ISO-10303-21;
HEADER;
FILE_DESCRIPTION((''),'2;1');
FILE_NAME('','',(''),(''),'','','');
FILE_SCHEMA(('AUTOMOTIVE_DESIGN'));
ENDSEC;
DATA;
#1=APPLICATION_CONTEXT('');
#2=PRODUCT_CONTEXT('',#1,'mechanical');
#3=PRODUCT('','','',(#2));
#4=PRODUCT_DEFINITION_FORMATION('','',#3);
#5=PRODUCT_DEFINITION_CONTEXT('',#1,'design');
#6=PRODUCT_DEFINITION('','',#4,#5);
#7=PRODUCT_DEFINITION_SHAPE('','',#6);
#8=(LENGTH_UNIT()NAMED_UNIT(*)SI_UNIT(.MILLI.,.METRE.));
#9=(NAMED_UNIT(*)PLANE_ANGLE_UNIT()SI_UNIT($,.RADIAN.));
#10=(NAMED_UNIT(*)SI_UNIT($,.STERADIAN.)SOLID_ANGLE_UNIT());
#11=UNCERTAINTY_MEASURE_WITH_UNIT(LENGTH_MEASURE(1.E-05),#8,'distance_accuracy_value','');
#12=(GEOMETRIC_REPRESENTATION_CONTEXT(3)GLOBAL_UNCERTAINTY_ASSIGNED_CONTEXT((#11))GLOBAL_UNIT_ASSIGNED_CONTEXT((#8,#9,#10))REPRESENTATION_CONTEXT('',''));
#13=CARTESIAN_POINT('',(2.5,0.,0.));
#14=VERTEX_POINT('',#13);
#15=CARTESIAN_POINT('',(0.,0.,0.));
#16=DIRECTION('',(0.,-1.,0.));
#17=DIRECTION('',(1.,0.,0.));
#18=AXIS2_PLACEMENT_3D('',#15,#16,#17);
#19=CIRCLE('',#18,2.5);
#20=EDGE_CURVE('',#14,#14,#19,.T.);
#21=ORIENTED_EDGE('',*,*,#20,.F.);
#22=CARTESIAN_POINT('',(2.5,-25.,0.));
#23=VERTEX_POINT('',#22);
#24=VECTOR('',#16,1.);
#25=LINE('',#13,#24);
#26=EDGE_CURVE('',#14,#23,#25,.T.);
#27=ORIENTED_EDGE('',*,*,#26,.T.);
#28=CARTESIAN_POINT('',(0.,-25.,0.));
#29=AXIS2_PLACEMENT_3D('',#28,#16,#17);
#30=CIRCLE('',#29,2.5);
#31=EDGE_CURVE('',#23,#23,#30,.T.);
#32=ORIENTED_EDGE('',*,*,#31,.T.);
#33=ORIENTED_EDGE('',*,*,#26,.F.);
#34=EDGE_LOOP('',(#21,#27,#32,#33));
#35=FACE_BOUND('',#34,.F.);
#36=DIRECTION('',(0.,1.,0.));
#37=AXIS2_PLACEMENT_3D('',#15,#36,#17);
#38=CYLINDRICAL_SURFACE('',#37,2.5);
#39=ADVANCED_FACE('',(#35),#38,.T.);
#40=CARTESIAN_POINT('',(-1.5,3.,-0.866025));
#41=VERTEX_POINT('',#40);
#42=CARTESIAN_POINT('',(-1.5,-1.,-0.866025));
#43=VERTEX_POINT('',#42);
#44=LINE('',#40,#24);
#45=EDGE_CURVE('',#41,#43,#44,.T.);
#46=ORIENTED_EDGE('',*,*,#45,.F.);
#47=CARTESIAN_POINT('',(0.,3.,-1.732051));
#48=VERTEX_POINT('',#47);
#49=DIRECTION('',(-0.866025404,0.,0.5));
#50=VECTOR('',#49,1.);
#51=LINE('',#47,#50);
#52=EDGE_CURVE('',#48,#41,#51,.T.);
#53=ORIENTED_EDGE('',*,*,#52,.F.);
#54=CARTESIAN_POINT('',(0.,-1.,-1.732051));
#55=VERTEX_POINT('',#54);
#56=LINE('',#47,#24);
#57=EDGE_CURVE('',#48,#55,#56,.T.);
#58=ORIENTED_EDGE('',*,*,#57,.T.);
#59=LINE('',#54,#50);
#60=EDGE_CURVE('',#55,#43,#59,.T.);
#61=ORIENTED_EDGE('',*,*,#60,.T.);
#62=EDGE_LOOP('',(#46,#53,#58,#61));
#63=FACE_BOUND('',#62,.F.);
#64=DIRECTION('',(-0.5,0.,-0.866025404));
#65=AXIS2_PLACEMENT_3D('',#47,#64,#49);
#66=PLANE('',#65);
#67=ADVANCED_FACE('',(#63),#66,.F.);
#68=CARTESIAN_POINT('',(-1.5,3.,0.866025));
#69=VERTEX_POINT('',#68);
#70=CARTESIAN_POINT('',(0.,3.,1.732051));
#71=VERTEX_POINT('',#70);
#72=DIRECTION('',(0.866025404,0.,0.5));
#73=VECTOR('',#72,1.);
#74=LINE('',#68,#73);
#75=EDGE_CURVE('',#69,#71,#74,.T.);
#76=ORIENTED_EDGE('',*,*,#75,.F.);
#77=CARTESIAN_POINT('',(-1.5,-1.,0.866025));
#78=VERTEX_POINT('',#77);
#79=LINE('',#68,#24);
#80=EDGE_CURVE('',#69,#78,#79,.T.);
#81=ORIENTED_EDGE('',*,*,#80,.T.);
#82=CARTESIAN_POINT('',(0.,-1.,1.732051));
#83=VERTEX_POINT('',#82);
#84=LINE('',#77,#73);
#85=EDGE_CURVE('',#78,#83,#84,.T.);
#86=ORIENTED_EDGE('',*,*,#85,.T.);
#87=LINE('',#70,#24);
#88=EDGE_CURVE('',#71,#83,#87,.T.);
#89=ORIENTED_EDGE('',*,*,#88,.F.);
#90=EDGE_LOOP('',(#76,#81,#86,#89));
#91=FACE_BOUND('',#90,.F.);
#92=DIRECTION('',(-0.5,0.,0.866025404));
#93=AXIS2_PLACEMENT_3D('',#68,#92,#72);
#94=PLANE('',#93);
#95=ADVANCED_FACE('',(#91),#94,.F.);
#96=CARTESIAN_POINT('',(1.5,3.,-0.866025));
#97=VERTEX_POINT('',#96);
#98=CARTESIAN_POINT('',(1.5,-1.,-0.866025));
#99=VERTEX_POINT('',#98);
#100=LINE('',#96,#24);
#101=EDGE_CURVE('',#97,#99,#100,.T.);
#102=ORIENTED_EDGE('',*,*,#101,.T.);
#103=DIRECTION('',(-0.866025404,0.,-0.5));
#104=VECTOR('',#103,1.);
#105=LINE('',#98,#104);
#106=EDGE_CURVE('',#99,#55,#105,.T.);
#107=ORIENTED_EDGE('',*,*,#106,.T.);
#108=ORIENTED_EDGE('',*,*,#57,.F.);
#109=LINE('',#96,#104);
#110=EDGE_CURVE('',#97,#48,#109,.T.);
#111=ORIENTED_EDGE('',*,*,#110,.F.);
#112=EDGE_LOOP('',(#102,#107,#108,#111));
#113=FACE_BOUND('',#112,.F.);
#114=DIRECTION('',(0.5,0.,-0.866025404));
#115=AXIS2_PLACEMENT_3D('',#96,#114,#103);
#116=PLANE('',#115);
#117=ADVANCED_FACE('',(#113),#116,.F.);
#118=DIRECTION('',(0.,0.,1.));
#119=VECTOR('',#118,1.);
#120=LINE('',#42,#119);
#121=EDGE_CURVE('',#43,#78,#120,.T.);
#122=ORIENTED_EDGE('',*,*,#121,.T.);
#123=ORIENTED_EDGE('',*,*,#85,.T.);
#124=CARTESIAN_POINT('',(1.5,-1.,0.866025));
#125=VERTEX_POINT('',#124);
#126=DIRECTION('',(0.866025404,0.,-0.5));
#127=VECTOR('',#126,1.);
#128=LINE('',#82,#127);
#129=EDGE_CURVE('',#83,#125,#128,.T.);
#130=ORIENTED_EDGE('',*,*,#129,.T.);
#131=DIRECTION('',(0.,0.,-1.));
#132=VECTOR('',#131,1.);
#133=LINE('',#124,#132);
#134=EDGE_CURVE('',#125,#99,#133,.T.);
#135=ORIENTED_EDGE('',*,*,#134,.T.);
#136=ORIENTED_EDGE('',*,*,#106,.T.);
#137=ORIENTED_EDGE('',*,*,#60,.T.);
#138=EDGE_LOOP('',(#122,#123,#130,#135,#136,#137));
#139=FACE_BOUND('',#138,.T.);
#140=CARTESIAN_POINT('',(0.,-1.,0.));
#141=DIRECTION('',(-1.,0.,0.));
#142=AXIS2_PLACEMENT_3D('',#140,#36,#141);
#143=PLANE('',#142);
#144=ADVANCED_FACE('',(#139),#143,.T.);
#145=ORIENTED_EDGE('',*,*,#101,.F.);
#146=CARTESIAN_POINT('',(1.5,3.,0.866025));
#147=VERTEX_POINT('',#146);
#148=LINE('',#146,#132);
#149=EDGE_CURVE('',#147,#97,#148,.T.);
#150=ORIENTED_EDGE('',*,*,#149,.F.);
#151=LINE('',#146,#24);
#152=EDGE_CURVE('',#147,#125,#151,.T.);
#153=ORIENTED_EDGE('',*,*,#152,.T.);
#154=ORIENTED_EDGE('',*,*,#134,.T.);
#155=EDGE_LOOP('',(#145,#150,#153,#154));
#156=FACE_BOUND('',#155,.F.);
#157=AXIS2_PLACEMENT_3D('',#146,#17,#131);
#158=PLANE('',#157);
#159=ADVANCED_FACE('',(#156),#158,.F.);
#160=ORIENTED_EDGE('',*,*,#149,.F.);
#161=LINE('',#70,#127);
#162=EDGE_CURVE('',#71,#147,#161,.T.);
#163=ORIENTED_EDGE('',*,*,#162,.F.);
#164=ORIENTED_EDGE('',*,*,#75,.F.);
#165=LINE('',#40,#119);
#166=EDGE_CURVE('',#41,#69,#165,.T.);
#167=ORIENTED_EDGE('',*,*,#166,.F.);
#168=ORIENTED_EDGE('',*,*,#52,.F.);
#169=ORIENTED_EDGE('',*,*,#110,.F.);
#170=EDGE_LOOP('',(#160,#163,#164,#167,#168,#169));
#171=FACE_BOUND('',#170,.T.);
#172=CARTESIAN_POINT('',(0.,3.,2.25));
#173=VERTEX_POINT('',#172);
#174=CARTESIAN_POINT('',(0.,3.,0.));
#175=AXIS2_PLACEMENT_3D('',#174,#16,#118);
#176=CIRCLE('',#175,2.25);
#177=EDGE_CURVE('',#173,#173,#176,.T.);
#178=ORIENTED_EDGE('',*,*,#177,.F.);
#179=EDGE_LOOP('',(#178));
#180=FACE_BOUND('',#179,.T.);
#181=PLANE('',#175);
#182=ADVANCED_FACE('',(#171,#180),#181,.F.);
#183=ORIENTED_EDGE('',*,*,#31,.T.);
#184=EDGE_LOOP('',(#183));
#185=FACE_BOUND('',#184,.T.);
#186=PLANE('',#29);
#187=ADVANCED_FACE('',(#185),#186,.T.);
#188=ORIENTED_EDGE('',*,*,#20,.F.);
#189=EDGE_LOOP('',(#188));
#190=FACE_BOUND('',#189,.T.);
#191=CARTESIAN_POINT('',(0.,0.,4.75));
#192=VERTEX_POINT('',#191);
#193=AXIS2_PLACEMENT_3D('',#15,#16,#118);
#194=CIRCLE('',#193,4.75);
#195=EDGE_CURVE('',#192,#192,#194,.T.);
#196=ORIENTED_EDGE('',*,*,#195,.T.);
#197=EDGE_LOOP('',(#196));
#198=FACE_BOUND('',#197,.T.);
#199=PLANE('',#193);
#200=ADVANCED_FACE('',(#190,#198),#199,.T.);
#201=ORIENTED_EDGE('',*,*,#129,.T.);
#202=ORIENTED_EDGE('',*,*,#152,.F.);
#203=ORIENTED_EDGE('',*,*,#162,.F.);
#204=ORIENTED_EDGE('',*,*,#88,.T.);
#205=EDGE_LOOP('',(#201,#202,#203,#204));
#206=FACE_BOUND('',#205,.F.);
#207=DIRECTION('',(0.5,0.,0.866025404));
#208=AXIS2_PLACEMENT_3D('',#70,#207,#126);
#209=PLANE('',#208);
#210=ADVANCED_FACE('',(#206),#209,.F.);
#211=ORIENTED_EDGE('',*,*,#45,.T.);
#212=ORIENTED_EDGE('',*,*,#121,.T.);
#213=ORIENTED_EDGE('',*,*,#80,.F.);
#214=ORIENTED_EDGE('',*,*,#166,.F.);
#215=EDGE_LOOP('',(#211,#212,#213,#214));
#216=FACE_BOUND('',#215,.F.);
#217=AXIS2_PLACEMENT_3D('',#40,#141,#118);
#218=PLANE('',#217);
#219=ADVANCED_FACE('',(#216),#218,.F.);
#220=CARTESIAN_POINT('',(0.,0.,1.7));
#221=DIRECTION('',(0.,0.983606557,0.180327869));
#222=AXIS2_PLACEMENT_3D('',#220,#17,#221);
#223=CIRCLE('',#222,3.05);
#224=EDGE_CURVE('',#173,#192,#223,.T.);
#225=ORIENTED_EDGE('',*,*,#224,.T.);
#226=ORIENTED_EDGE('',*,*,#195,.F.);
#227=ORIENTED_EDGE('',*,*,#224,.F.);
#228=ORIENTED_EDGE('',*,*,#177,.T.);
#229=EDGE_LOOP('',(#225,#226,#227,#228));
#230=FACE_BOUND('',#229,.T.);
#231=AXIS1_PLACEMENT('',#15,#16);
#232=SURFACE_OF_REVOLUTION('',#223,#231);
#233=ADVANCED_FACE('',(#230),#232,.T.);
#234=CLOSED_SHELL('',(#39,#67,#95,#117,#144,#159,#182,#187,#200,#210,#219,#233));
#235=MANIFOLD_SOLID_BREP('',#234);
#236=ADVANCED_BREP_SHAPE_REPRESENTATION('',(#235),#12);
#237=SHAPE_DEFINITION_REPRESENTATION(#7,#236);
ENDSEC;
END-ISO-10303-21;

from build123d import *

# Parameters (mm, degrees)
F1_R     = 2.5
F2_DEPTH = 25
F6_DEPTH = 4


with BuildPart() as f2:
    # F1 (on Front) → F2 (new body)
    with BuildSketch(Plane.XZ):
        Circle(F1_R)
    extrude(amount=F2_DEPTH)

    # F3 (on Right) → F4 (revolve)
    with BuildSketch(Plane.YZ):
        with BuildLine():
            Line((0, 4.75), (0, 0))
            Line((0, 0), (3, 0))
            Line((3, 0), (3, 1.5))
            Line((3, 1.5), (3, 2.25))
            ThreePointArc((3, 2.25), (1.952562419, 4.0430749028), (0, 4.75))
        make_face()
    revolve(axis=Axis((0, 0, 0), (0, -1, 0)))

    # F5 (on face) → F6 (cut)
    with BuildSketch(Plane(origin=(0, 3, 0), x_dir=(-1, 0, 0), z_dir=(0, 1, 0))):
        Polygon((-1.5, 0.8660254038), (-1.5, -0.8660254038), (0, -1.7320508076), (1.5, -0.8660254038), (1.5, 0.8660254038), (0, 1.7320508076), align=None)
    extrude(amount=-F6_DEPTH, mode=Mode.SUBTRACT)


solid = f2.part
